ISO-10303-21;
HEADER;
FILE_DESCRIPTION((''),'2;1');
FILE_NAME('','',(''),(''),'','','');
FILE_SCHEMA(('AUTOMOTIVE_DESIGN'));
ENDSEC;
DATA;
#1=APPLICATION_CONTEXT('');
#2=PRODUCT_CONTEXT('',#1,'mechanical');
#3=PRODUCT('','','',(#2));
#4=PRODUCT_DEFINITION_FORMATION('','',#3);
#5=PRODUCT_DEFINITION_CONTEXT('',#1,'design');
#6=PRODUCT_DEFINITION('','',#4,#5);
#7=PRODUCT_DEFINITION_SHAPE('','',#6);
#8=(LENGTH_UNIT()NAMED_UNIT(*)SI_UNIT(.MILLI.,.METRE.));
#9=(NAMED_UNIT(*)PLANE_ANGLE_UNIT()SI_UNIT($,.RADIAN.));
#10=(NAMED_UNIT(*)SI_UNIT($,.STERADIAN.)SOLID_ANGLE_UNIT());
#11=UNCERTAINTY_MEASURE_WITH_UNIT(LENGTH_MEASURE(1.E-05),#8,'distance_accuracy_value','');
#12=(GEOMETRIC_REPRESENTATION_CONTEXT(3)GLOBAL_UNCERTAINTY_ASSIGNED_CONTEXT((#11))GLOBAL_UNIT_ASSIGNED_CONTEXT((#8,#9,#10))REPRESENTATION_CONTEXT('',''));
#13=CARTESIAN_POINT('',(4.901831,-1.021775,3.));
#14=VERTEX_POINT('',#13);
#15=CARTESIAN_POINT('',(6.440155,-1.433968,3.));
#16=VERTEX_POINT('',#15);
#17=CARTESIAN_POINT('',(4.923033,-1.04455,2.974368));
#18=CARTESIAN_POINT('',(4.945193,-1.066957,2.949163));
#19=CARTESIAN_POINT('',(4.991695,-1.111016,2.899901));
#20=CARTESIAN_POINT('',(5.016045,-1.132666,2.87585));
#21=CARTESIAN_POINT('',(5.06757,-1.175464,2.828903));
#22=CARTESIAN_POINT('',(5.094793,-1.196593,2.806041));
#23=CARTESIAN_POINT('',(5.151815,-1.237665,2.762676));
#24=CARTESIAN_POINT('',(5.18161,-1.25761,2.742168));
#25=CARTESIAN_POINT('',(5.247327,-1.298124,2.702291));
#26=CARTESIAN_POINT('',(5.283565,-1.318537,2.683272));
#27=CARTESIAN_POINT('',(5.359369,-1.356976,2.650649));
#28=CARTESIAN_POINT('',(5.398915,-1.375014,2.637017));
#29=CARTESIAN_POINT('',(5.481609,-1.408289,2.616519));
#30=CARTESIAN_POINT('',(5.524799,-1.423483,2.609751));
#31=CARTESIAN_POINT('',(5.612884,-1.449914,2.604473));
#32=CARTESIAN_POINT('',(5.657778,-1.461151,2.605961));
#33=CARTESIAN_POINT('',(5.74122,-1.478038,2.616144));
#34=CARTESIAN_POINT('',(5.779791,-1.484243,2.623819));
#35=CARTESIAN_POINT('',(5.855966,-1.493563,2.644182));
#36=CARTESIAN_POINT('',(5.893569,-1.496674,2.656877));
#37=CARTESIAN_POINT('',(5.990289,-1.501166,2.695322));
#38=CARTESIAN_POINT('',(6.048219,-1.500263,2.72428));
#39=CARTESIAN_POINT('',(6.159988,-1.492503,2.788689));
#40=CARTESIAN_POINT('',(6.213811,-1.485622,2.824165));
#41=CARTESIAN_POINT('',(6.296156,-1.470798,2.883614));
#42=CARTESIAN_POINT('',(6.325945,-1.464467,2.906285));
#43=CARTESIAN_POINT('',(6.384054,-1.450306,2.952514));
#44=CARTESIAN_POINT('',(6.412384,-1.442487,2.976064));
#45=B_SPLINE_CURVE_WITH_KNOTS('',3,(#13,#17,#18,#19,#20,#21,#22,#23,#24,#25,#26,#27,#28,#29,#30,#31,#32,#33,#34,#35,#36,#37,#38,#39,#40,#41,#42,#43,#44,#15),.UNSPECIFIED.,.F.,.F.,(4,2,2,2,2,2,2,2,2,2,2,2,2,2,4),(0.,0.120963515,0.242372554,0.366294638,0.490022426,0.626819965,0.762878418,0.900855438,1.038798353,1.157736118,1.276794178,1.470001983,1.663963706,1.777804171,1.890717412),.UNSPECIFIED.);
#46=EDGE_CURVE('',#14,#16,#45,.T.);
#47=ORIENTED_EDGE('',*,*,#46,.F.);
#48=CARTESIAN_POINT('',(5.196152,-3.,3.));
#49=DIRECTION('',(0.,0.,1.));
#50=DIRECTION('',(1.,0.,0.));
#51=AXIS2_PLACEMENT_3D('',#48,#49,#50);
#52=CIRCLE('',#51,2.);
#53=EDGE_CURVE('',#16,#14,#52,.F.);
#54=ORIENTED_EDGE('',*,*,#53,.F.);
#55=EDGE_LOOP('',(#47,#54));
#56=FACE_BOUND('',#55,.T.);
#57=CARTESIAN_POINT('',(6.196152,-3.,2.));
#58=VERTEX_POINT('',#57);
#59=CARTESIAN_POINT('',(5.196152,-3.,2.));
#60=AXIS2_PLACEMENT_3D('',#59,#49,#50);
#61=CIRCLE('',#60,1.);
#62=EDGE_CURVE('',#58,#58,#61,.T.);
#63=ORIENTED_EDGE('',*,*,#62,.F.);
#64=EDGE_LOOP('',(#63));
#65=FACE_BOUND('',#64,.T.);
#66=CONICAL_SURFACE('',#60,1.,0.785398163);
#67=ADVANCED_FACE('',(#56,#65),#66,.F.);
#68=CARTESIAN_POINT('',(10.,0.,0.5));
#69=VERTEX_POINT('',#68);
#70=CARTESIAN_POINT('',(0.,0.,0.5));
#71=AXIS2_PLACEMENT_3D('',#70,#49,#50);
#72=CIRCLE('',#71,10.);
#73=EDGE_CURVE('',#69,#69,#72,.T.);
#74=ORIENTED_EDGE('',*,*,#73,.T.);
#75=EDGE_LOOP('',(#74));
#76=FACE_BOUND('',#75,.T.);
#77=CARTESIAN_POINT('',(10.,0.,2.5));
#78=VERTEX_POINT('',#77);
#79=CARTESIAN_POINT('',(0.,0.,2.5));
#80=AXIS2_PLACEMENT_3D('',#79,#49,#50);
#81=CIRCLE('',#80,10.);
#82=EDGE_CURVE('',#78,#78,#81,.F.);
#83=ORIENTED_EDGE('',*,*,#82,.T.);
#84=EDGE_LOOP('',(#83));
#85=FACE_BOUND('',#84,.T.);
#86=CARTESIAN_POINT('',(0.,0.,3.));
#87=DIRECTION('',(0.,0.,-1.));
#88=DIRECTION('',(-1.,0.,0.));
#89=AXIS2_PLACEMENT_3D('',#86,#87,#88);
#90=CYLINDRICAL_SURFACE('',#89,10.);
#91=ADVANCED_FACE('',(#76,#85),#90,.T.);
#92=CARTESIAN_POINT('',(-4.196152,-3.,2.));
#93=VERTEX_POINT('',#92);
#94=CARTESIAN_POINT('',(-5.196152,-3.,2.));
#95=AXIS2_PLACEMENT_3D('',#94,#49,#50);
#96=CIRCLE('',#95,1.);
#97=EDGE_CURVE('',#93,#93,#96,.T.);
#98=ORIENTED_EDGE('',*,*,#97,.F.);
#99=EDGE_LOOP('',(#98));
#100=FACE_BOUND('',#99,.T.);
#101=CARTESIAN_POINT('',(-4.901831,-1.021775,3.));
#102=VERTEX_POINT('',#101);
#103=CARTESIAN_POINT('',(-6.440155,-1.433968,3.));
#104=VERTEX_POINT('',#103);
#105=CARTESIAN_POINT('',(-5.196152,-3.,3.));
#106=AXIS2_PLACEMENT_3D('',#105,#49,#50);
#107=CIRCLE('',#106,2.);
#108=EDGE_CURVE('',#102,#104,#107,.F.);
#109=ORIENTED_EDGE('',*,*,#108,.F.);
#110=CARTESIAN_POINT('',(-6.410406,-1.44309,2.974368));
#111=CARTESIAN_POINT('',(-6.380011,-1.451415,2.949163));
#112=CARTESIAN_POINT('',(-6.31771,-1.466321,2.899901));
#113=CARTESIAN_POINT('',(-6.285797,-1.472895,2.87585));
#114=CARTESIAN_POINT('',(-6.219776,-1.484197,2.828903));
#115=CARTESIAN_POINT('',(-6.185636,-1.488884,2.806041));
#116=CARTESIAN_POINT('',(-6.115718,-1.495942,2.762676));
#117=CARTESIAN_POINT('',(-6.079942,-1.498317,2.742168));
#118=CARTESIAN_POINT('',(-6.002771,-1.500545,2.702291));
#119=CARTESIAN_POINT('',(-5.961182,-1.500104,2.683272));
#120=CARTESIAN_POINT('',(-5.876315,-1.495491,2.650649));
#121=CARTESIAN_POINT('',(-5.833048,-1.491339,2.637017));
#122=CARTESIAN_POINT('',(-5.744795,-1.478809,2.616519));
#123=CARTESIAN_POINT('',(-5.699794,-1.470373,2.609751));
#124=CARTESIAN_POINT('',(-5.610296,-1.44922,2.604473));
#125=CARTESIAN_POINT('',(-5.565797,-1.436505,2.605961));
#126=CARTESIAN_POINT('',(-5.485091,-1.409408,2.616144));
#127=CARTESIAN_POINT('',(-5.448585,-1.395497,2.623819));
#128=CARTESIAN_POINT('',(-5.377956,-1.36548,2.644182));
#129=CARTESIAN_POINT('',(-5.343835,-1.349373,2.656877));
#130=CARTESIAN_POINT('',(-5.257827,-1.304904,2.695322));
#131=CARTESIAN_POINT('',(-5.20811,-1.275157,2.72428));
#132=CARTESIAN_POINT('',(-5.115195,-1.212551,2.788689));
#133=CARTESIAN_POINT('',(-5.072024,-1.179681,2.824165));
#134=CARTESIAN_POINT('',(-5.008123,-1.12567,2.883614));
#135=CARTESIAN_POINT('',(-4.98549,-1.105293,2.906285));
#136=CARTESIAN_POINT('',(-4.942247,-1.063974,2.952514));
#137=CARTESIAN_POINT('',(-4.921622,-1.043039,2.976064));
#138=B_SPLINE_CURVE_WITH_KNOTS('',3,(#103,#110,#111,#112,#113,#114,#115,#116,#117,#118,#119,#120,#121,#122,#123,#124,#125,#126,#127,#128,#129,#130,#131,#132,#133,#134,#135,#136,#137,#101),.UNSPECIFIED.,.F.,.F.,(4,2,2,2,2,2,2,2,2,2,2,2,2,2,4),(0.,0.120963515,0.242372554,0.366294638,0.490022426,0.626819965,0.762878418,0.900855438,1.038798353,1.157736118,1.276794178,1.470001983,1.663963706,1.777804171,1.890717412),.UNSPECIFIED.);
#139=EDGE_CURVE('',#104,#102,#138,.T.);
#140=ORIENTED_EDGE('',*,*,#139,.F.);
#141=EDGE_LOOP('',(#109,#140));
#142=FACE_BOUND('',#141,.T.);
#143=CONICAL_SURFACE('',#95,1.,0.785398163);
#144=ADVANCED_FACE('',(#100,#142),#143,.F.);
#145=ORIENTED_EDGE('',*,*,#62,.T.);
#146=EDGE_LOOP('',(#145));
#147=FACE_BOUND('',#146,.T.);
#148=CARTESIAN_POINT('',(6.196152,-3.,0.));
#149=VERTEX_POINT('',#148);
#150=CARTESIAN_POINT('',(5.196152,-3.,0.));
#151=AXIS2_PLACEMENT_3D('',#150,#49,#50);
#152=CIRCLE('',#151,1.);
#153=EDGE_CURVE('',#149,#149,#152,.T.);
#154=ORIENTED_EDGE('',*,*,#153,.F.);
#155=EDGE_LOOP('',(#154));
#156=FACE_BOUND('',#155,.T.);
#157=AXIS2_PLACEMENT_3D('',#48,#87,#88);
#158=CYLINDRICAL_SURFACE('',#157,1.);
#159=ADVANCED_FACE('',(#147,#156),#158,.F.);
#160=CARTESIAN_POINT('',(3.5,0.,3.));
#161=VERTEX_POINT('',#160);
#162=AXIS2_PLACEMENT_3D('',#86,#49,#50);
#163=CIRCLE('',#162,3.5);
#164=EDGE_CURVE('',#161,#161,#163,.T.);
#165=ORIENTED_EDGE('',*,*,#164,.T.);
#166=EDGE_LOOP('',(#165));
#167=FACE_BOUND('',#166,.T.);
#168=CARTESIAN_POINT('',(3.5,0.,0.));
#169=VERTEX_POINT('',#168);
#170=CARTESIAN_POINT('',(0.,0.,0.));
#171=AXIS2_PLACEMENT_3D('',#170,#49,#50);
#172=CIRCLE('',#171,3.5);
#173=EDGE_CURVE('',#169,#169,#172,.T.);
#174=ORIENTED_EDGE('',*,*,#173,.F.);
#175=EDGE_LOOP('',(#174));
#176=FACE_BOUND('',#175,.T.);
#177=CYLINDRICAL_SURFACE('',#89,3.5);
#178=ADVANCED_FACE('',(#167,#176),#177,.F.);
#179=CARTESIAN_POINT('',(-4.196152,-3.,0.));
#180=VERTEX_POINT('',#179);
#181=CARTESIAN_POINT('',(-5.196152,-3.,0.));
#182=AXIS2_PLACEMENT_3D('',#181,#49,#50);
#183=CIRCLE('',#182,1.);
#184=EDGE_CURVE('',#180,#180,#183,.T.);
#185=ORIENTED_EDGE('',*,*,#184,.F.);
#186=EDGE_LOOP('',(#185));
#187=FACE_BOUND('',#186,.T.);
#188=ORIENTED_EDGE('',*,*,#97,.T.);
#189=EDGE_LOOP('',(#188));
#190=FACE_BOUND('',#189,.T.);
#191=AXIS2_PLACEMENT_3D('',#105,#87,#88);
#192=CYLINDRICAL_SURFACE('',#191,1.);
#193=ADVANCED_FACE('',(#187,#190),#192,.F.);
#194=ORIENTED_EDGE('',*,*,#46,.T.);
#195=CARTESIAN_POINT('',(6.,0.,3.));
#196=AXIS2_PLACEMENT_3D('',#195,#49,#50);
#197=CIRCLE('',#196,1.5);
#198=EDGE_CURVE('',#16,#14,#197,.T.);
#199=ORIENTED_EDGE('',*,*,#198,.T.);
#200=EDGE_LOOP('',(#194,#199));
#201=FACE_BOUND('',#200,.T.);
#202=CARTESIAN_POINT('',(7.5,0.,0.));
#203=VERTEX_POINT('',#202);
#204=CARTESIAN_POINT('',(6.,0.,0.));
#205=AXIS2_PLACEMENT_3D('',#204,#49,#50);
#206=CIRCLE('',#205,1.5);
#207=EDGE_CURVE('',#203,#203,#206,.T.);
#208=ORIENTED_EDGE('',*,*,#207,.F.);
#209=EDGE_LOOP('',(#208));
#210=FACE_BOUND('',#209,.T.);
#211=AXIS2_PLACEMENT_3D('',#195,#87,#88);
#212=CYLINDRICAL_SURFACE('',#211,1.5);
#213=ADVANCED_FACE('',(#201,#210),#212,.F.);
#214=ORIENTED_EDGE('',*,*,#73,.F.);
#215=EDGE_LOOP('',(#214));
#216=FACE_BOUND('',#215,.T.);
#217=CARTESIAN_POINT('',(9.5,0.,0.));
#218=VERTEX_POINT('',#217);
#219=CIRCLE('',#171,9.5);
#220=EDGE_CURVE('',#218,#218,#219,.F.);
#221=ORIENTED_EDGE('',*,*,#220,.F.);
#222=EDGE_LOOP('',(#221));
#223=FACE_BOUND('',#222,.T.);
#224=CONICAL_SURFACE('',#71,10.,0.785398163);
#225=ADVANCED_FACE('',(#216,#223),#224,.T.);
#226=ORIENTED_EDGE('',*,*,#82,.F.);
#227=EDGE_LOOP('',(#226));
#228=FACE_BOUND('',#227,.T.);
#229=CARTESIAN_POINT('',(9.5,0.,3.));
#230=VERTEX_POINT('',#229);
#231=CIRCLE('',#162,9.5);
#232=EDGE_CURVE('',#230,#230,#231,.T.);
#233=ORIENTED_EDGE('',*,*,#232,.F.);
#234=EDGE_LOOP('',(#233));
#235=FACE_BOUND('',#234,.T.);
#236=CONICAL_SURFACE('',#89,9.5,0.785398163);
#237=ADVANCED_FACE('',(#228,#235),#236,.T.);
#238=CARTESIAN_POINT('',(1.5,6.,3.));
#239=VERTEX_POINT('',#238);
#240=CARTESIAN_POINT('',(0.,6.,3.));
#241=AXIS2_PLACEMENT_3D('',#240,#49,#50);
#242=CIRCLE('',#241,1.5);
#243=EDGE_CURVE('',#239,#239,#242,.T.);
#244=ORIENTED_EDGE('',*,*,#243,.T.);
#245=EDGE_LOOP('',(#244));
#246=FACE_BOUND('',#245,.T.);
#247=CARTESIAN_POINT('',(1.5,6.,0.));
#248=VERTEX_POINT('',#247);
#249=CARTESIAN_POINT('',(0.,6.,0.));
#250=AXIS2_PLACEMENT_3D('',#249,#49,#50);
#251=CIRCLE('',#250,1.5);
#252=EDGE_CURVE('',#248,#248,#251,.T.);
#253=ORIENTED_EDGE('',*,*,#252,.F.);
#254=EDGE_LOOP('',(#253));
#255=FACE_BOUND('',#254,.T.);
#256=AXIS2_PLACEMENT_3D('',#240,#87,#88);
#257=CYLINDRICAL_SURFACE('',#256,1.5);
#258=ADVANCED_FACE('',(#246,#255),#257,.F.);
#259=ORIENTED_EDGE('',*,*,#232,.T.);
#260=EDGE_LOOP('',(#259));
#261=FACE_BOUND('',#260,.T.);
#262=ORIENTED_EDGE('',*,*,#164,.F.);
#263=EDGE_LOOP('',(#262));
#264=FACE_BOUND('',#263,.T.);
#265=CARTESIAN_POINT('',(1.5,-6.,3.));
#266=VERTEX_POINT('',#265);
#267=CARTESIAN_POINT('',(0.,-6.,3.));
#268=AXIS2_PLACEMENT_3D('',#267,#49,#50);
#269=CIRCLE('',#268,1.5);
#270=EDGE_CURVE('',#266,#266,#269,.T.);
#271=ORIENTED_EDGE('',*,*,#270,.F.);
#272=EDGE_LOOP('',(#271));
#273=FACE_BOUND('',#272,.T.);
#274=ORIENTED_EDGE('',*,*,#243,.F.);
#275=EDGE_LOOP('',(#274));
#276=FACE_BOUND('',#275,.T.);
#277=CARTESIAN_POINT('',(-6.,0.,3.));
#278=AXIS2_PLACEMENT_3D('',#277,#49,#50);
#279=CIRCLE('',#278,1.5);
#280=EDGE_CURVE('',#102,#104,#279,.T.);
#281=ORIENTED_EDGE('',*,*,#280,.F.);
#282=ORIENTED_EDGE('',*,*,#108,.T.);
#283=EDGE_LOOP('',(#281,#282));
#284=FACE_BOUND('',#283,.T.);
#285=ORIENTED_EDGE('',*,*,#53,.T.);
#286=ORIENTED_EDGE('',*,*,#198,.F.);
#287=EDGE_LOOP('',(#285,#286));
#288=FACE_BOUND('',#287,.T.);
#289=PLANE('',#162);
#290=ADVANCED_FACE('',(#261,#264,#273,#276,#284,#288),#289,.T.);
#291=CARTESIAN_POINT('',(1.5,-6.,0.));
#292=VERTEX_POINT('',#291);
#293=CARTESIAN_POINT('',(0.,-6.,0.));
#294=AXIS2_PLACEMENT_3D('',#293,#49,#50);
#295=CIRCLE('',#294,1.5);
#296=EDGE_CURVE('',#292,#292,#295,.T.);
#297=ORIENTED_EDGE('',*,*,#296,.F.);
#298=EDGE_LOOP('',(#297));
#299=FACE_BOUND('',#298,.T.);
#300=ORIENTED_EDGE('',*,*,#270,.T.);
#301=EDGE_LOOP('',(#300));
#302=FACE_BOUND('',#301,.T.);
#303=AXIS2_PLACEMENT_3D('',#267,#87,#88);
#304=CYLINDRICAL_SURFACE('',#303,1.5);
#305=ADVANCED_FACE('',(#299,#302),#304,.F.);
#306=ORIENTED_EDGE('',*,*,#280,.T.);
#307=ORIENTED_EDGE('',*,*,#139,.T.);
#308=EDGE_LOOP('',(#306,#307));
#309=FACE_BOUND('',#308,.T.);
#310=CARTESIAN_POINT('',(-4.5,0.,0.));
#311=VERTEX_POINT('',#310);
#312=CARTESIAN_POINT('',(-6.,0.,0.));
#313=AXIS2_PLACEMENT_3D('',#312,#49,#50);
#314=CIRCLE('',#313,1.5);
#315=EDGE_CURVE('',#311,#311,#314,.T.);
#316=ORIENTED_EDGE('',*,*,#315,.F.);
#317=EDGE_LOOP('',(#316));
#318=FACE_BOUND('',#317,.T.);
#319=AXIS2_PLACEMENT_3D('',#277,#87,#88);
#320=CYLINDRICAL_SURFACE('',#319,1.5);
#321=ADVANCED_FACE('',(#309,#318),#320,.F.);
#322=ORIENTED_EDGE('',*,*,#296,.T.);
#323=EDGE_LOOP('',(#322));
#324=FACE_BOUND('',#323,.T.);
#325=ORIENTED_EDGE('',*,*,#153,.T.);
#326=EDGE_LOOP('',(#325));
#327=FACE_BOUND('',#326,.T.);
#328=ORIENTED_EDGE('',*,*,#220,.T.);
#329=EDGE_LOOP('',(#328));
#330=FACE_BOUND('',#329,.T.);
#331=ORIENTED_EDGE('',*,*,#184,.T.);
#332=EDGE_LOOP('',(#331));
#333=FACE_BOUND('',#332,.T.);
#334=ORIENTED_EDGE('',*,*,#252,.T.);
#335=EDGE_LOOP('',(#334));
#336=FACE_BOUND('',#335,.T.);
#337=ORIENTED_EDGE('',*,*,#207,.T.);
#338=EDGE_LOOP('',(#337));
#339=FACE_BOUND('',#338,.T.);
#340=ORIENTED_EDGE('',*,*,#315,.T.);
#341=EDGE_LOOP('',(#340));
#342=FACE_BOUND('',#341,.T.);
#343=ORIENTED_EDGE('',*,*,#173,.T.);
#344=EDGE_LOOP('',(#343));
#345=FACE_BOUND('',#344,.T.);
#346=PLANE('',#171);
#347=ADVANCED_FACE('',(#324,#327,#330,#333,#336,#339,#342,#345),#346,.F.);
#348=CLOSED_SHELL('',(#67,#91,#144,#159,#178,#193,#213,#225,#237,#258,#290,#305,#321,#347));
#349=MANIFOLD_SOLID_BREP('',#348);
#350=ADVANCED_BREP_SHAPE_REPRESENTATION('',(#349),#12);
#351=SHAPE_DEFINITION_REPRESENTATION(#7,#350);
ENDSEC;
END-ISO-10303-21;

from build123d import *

# Parameters (mm, degrees)
SKETCH_1_R      = 10
SKETCH_1_R_2    = 1.5
SKETCH_1_R_3    = 3.5
SKETCH_1_R_4    = 1
EXTRUDE_1_DEPTH = 3
CHAMFER_1_SIZE  = 0.5
CHAMFER_2_SIZE  = 1


with BuildPart() as part:
    # 草图1 → 凸台-拉伸1 (new body)
    with BuildSketch(Plane.XY):
        Circle(SKETCH_1_R)
        with Locations((-6, 0)):
            Circle(SKETCH_1_R_2, mode=Mode.SUBTRACT)
        with Locations((0, -6)):
            Circle(SKETCH_1_R_2, mode=Mode.SUBTRACT)
        with Locations((6, 0)):
            Circle(SKETCH_1_R_2, mode=Mode.SUBTRACT)
        Circle(SKETCH_1_R_3, mode=Mode.SUBTRACT)
        with Locations((0, 6)):
            Circle(SKETCH_1_R_2, mode=Mode.SUBTRACT)
        with Locations((5.196152423, -3)):
            Circle(SKETCH_1_R_4, mode=Mode.SUBTRACT)
        with Locations((-5.196152423, -3)):
            Circle(SKETCH_1_R_4, mode=Mode.SUBTRACT)
    extrude(amount=EXTRUDE_1_DEPTH)

    # 倒角1
    chamfer_1_edges = [part.edges().sort_by_distance(p)[0] for p in [
        (-10, 0, 0),
        (-10, 0, 3),
    ]]
    chamfer(chamfer_1_edges, length=CHAMFER_1_SIZE)

    # 倒角2
    # the kernel refuses this chamfer: 1 mm, written as the material it takes off along each edge
    with BuildSketch(Plane(origin=(5.196152423, -3, 3), x_dir=(1, 0, 0), z_dir=(0, -1, 0))) as chamfer_2_piece_1:
        Polygon((1 + CHAMFER_2_SIZE, 0), (1, -CHAMFER_2_SIZE), (1, 0), align=None)
    revolve(axis=Axis((5.196152423, -3, 3), (0, 0, 1)), mode=Mode.SUBTRACT)
    with BuildSketch(Plane(origin=(-5.196152423, -3, 3), x_dir=(1, 0, 0), z_dir=(0, -1, 0))) as chamfer_2_piece_2:
        Polygon((1 + CHAMFER_2_SIZE, 0), (1, -CHAMFER_2_SIZE), (1, 0), align=None)
    revolve(axis=Axis((-5.196152423, -3, 3), (0, 0, 1)), mode=Mode.SUBTRACT)


solid = part.part
